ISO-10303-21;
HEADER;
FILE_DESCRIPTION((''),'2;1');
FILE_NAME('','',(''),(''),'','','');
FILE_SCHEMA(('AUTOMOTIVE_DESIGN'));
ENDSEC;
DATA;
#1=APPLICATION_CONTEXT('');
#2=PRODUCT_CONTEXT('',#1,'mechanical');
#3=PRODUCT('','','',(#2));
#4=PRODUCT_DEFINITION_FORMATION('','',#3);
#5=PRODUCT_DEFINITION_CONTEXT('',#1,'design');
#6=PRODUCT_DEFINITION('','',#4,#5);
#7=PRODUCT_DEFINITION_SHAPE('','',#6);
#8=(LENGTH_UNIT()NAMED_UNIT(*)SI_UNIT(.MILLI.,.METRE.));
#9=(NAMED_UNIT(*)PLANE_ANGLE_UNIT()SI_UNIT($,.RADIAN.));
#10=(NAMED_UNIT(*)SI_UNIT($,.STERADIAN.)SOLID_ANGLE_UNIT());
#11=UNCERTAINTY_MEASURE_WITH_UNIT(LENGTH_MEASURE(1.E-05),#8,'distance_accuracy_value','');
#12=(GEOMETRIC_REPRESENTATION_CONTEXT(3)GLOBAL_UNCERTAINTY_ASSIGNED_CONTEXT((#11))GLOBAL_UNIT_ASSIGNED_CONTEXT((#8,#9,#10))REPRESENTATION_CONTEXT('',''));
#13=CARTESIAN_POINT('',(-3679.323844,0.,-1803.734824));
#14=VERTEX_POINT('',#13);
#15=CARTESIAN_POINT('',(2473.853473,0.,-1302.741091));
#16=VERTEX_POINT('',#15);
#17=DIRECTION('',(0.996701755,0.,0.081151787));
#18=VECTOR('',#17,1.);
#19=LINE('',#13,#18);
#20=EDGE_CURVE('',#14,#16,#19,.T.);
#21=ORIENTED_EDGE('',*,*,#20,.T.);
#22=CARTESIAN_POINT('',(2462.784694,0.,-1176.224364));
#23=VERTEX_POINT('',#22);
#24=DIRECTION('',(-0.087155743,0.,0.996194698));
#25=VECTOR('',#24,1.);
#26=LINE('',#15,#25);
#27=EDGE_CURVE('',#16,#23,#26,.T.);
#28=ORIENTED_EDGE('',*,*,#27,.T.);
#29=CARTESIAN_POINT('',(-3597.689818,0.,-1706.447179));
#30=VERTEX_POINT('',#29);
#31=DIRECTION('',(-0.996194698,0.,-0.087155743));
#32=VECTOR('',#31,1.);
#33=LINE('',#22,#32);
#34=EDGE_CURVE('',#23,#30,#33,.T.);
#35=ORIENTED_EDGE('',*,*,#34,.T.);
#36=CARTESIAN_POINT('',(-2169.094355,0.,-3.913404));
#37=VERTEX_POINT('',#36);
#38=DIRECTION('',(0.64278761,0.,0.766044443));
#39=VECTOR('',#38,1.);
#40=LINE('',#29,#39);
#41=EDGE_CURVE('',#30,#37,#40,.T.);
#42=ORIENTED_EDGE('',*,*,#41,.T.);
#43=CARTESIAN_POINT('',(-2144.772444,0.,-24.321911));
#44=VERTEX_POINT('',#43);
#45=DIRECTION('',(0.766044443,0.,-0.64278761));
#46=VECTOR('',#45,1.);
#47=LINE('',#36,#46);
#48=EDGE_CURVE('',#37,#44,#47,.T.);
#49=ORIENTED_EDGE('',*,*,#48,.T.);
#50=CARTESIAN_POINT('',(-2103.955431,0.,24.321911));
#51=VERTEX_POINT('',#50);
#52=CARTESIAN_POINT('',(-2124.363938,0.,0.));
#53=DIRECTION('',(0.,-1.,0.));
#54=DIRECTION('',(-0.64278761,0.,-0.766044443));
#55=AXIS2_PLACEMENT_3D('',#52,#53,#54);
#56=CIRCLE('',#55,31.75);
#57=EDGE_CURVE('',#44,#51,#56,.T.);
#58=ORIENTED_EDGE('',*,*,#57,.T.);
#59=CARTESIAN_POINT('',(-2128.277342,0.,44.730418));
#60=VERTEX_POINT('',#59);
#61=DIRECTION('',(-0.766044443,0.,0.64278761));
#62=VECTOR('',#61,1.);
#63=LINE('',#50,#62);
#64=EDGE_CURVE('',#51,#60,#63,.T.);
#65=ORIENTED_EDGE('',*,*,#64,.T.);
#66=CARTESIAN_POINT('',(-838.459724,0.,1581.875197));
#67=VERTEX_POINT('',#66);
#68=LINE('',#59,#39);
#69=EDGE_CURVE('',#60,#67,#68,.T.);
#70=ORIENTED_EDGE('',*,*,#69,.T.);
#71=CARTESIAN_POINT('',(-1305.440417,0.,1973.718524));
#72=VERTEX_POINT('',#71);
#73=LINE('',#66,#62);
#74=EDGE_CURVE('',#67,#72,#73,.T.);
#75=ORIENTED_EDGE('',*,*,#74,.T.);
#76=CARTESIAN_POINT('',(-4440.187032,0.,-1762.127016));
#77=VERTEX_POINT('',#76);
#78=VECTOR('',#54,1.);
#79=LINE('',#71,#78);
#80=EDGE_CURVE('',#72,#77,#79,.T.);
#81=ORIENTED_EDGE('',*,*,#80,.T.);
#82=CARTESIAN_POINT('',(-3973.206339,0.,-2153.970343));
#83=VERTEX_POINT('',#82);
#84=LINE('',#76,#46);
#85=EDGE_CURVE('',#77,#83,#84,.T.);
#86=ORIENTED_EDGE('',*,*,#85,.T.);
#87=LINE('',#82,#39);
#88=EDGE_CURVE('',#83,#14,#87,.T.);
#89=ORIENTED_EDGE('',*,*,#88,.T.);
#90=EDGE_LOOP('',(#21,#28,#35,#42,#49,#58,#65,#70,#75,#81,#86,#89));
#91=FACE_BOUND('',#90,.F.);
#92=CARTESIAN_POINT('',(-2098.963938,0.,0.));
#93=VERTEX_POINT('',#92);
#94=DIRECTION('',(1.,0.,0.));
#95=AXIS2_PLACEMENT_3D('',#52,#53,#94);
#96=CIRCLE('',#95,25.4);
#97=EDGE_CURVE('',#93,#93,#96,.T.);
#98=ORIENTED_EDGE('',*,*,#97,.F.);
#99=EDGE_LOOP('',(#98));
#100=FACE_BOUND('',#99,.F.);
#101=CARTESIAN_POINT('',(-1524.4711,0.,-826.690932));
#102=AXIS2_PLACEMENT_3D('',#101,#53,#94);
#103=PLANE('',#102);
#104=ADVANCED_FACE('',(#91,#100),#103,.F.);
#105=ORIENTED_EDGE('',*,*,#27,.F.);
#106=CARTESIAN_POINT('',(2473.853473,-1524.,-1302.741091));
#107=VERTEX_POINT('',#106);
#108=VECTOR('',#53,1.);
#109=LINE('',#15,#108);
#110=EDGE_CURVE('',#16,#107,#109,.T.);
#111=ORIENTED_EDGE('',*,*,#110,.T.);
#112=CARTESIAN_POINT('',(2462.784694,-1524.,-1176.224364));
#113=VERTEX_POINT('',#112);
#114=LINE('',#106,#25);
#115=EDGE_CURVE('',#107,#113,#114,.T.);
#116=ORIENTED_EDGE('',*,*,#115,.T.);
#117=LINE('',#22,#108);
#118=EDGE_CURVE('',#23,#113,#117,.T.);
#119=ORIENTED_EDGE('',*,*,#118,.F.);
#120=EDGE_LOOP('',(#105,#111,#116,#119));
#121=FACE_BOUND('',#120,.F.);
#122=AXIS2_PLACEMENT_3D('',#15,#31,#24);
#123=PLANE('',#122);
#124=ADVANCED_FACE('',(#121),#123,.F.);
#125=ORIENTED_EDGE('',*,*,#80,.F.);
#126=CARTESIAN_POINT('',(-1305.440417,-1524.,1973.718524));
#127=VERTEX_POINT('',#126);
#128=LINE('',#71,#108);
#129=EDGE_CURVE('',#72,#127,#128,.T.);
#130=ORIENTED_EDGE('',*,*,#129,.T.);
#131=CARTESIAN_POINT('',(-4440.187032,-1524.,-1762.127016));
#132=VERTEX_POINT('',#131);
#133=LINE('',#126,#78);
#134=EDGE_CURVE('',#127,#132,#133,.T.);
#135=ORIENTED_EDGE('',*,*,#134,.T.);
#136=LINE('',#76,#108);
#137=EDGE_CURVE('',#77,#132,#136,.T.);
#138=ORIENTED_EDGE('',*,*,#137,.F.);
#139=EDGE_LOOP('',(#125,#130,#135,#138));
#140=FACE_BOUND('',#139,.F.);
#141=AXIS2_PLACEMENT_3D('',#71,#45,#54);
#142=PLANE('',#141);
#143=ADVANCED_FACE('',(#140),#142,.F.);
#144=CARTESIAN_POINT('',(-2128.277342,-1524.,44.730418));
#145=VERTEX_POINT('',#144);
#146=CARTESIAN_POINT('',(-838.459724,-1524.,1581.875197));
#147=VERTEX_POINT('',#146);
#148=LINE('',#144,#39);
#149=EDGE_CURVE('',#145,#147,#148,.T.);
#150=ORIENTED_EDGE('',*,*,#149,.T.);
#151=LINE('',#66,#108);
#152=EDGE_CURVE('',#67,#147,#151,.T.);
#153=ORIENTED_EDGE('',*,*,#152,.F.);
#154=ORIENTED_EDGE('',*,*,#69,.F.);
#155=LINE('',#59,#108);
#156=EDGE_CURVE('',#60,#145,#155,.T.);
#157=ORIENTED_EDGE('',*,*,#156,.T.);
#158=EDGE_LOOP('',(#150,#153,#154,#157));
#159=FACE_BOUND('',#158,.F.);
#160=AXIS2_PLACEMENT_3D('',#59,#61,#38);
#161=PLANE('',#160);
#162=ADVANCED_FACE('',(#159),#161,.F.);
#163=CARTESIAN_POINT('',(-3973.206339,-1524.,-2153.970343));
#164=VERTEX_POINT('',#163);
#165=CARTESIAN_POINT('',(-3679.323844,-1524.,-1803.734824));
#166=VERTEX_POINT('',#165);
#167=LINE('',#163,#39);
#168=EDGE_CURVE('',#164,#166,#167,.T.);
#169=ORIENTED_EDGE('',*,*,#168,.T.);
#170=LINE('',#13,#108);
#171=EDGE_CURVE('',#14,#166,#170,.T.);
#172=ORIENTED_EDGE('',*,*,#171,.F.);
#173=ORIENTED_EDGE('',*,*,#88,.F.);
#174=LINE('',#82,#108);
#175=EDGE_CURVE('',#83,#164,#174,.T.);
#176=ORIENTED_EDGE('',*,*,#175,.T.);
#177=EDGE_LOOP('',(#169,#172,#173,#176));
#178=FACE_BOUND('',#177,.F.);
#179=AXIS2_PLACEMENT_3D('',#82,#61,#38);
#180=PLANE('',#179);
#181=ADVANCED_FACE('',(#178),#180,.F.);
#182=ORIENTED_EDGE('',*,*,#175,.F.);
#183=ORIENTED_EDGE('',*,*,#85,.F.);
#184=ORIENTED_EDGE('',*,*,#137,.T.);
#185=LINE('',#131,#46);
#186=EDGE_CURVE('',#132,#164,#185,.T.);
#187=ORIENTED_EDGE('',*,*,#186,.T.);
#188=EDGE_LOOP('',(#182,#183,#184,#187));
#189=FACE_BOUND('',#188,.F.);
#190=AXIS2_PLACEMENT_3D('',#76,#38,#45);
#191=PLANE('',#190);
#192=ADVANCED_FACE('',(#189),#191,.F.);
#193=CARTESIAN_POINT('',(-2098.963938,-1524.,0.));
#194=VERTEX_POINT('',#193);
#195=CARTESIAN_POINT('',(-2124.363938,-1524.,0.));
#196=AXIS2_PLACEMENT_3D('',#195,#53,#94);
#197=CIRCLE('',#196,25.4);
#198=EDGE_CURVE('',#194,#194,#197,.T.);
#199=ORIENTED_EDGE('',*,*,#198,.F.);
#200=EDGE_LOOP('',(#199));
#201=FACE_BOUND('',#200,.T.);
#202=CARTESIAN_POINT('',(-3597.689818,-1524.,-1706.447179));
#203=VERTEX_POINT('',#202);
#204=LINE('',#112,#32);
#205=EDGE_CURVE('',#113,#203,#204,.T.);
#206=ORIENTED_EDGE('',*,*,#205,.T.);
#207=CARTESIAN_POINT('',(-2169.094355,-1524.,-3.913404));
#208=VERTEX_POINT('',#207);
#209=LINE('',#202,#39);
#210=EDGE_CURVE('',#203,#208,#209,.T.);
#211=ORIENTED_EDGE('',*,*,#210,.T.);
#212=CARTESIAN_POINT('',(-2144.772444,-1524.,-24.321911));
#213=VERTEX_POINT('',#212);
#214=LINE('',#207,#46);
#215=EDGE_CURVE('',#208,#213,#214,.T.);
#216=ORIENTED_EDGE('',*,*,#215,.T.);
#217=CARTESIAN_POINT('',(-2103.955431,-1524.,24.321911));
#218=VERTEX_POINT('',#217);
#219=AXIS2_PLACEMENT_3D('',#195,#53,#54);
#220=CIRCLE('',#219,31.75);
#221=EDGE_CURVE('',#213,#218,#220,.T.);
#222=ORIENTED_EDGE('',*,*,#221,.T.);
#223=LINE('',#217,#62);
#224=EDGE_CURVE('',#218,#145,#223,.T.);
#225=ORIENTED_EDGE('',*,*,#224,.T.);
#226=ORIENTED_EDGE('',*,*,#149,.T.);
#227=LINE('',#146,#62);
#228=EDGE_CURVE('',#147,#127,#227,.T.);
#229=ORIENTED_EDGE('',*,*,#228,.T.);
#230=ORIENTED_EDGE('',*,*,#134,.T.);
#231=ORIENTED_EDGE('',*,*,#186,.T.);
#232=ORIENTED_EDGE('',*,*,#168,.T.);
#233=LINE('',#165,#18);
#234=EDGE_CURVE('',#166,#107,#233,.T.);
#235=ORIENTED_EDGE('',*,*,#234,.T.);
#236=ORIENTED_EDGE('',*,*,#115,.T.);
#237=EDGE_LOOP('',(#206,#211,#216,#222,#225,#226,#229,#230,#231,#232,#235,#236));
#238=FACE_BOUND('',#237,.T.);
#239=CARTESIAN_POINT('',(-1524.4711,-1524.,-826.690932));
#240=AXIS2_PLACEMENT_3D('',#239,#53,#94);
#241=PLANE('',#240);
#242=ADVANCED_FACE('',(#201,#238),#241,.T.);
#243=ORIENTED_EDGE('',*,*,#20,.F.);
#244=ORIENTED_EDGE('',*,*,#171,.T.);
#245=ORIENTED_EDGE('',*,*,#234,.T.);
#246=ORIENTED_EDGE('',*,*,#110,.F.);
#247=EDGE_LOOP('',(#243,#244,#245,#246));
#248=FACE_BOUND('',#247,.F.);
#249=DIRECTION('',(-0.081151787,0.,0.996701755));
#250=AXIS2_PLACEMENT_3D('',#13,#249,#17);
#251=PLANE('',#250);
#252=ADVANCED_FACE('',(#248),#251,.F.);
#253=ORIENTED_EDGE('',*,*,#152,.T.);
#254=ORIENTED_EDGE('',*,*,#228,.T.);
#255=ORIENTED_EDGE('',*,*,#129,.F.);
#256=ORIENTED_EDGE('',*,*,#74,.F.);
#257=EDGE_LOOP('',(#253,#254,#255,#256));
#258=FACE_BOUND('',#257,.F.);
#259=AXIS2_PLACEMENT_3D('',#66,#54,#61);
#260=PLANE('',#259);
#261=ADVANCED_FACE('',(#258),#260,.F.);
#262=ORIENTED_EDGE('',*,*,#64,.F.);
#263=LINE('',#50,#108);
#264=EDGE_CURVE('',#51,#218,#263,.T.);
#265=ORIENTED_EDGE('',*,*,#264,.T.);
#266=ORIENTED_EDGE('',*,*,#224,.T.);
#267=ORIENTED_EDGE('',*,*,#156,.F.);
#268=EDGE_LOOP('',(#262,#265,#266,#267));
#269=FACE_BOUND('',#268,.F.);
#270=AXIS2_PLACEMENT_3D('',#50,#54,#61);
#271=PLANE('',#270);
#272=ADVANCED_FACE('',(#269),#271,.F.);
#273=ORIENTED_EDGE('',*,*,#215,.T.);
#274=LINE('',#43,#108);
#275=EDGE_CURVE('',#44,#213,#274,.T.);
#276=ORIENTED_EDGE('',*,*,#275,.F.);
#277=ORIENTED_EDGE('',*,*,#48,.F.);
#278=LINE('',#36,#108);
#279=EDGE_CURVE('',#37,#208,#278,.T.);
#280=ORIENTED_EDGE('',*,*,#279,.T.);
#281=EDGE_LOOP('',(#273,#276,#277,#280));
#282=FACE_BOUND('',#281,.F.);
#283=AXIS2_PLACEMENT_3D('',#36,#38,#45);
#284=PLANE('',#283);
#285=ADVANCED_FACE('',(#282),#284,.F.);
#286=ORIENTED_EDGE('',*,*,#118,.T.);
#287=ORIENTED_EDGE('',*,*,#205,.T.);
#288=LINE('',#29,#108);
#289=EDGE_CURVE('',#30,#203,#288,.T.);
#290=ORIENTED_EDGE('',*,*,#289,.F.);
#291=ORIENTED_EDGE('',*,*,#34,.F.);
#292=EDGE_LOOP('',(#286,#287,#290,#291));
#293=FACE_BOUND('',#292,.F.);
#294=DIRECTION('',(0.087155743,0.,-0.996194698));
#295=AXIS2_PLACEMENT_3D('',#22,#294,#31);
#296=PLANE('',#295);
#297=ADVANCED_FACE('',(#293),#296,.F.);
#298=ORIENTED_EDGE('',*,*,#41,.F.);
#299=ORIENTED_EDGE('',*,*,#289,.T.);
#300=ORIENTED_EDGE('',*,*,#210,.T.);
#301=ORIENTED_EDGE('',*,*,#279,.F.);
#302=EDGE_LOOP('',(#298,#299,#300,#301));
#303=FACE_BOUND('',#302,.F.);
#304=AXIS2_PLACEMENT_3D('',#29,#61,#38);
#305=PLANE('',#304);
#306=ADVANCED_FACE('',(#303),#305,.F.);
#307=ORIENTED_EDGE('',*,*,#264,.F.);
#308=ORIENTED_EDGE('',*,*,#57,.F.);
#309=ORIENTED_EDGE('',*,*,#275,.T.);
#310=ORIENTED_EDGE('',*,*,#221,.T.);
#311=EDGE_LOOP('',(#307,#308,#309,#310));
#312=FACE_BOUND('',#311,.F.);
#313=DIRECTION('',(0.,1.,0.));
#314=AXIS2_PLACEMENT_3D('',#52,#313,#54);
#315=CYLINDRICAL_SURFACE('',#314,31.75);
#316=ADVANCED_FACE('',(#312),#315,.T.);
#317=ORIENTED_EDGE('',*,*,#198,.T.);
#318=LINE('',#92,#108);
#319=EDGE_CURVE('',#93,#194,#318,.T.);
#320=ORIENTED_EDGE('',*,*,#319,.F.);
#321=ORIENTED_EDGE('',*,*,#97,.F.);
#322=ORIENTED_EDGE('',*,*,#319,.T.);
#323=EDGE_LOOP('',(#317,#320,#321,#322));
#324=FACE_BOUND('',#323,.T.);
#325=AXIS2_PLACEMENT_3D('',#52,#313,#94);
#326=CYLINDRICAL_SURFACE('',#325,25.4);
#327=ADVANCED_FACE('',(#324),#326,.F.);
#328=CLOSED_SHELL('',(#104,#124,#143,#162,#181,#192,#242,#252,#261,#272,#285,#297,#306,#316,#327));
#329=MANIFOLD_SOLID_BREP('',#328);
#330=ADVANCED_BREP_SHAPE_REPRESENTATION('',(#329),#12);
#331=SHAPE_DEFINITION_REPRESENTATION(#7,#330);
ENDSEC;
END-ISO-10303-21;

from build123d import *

# Parameters (mm, degrees)
F0_R     = 25.4
F1_DEPTH = 1524


# Not quite as in the source:
# - a feature names something its author has since deleted; it is built from what else it names


with BuildPart() as f1:
    # F0 (on Front) → F1 (new body)
    with BuildSketch(Plane.XZ):
        with BuildLine():
            Line((-2128.2773420369, 44.7304176766), (-838.4597244399, 1581.8751972391))
            Line((-838.4597244399, 1581.8751972391), (-1305.4404169652, 1973.718524104))
            Line((-1305.4404169652, 1973.718524104), (-4440.1870318845, -1762.1270160986))
            Line((-4440.1870318845, -1762.1270160986), (-3973.2063393592, -2153.9703429635))
            Line((-3973.2063393592, -2153.9703429635), (-3679.3238442105, -1803.7348235695))
            Line((-3679.3238442105, -1803.7348235695), (2473.8534732187, -1302.7410905921))
            Line((2473.8534732187, -1302.7410905921), (2462.7846938898, -1176.2243639345))
            Line((2462.7846938898, -1176.2243639345), (-3597.6898177803, -1706.4471792934))
            Line((-3597.6898177803, -1706.4471792934), (-2169.094355252, -3.9134044615))
            Line((-2169.094355252, -3.9134044615), (-2144.772444183, -24.321911069))
            ThreePointArc((-2144.772444183, -24.321911069), (-2100.0420265064, -20.4085066075), (-2103.9554309679, 24.321911069))
            Line((-2103.9554309679, 24.321911069), (-2128.2773420369, 44.7304176766))
        make_face()
        with Locations((-2124.3639375754, 0)):
            Circle(F0_R, mode=Mode.SUBTRACT)
    extrude(amount=F1_DEPTH)


solid = f1.part
